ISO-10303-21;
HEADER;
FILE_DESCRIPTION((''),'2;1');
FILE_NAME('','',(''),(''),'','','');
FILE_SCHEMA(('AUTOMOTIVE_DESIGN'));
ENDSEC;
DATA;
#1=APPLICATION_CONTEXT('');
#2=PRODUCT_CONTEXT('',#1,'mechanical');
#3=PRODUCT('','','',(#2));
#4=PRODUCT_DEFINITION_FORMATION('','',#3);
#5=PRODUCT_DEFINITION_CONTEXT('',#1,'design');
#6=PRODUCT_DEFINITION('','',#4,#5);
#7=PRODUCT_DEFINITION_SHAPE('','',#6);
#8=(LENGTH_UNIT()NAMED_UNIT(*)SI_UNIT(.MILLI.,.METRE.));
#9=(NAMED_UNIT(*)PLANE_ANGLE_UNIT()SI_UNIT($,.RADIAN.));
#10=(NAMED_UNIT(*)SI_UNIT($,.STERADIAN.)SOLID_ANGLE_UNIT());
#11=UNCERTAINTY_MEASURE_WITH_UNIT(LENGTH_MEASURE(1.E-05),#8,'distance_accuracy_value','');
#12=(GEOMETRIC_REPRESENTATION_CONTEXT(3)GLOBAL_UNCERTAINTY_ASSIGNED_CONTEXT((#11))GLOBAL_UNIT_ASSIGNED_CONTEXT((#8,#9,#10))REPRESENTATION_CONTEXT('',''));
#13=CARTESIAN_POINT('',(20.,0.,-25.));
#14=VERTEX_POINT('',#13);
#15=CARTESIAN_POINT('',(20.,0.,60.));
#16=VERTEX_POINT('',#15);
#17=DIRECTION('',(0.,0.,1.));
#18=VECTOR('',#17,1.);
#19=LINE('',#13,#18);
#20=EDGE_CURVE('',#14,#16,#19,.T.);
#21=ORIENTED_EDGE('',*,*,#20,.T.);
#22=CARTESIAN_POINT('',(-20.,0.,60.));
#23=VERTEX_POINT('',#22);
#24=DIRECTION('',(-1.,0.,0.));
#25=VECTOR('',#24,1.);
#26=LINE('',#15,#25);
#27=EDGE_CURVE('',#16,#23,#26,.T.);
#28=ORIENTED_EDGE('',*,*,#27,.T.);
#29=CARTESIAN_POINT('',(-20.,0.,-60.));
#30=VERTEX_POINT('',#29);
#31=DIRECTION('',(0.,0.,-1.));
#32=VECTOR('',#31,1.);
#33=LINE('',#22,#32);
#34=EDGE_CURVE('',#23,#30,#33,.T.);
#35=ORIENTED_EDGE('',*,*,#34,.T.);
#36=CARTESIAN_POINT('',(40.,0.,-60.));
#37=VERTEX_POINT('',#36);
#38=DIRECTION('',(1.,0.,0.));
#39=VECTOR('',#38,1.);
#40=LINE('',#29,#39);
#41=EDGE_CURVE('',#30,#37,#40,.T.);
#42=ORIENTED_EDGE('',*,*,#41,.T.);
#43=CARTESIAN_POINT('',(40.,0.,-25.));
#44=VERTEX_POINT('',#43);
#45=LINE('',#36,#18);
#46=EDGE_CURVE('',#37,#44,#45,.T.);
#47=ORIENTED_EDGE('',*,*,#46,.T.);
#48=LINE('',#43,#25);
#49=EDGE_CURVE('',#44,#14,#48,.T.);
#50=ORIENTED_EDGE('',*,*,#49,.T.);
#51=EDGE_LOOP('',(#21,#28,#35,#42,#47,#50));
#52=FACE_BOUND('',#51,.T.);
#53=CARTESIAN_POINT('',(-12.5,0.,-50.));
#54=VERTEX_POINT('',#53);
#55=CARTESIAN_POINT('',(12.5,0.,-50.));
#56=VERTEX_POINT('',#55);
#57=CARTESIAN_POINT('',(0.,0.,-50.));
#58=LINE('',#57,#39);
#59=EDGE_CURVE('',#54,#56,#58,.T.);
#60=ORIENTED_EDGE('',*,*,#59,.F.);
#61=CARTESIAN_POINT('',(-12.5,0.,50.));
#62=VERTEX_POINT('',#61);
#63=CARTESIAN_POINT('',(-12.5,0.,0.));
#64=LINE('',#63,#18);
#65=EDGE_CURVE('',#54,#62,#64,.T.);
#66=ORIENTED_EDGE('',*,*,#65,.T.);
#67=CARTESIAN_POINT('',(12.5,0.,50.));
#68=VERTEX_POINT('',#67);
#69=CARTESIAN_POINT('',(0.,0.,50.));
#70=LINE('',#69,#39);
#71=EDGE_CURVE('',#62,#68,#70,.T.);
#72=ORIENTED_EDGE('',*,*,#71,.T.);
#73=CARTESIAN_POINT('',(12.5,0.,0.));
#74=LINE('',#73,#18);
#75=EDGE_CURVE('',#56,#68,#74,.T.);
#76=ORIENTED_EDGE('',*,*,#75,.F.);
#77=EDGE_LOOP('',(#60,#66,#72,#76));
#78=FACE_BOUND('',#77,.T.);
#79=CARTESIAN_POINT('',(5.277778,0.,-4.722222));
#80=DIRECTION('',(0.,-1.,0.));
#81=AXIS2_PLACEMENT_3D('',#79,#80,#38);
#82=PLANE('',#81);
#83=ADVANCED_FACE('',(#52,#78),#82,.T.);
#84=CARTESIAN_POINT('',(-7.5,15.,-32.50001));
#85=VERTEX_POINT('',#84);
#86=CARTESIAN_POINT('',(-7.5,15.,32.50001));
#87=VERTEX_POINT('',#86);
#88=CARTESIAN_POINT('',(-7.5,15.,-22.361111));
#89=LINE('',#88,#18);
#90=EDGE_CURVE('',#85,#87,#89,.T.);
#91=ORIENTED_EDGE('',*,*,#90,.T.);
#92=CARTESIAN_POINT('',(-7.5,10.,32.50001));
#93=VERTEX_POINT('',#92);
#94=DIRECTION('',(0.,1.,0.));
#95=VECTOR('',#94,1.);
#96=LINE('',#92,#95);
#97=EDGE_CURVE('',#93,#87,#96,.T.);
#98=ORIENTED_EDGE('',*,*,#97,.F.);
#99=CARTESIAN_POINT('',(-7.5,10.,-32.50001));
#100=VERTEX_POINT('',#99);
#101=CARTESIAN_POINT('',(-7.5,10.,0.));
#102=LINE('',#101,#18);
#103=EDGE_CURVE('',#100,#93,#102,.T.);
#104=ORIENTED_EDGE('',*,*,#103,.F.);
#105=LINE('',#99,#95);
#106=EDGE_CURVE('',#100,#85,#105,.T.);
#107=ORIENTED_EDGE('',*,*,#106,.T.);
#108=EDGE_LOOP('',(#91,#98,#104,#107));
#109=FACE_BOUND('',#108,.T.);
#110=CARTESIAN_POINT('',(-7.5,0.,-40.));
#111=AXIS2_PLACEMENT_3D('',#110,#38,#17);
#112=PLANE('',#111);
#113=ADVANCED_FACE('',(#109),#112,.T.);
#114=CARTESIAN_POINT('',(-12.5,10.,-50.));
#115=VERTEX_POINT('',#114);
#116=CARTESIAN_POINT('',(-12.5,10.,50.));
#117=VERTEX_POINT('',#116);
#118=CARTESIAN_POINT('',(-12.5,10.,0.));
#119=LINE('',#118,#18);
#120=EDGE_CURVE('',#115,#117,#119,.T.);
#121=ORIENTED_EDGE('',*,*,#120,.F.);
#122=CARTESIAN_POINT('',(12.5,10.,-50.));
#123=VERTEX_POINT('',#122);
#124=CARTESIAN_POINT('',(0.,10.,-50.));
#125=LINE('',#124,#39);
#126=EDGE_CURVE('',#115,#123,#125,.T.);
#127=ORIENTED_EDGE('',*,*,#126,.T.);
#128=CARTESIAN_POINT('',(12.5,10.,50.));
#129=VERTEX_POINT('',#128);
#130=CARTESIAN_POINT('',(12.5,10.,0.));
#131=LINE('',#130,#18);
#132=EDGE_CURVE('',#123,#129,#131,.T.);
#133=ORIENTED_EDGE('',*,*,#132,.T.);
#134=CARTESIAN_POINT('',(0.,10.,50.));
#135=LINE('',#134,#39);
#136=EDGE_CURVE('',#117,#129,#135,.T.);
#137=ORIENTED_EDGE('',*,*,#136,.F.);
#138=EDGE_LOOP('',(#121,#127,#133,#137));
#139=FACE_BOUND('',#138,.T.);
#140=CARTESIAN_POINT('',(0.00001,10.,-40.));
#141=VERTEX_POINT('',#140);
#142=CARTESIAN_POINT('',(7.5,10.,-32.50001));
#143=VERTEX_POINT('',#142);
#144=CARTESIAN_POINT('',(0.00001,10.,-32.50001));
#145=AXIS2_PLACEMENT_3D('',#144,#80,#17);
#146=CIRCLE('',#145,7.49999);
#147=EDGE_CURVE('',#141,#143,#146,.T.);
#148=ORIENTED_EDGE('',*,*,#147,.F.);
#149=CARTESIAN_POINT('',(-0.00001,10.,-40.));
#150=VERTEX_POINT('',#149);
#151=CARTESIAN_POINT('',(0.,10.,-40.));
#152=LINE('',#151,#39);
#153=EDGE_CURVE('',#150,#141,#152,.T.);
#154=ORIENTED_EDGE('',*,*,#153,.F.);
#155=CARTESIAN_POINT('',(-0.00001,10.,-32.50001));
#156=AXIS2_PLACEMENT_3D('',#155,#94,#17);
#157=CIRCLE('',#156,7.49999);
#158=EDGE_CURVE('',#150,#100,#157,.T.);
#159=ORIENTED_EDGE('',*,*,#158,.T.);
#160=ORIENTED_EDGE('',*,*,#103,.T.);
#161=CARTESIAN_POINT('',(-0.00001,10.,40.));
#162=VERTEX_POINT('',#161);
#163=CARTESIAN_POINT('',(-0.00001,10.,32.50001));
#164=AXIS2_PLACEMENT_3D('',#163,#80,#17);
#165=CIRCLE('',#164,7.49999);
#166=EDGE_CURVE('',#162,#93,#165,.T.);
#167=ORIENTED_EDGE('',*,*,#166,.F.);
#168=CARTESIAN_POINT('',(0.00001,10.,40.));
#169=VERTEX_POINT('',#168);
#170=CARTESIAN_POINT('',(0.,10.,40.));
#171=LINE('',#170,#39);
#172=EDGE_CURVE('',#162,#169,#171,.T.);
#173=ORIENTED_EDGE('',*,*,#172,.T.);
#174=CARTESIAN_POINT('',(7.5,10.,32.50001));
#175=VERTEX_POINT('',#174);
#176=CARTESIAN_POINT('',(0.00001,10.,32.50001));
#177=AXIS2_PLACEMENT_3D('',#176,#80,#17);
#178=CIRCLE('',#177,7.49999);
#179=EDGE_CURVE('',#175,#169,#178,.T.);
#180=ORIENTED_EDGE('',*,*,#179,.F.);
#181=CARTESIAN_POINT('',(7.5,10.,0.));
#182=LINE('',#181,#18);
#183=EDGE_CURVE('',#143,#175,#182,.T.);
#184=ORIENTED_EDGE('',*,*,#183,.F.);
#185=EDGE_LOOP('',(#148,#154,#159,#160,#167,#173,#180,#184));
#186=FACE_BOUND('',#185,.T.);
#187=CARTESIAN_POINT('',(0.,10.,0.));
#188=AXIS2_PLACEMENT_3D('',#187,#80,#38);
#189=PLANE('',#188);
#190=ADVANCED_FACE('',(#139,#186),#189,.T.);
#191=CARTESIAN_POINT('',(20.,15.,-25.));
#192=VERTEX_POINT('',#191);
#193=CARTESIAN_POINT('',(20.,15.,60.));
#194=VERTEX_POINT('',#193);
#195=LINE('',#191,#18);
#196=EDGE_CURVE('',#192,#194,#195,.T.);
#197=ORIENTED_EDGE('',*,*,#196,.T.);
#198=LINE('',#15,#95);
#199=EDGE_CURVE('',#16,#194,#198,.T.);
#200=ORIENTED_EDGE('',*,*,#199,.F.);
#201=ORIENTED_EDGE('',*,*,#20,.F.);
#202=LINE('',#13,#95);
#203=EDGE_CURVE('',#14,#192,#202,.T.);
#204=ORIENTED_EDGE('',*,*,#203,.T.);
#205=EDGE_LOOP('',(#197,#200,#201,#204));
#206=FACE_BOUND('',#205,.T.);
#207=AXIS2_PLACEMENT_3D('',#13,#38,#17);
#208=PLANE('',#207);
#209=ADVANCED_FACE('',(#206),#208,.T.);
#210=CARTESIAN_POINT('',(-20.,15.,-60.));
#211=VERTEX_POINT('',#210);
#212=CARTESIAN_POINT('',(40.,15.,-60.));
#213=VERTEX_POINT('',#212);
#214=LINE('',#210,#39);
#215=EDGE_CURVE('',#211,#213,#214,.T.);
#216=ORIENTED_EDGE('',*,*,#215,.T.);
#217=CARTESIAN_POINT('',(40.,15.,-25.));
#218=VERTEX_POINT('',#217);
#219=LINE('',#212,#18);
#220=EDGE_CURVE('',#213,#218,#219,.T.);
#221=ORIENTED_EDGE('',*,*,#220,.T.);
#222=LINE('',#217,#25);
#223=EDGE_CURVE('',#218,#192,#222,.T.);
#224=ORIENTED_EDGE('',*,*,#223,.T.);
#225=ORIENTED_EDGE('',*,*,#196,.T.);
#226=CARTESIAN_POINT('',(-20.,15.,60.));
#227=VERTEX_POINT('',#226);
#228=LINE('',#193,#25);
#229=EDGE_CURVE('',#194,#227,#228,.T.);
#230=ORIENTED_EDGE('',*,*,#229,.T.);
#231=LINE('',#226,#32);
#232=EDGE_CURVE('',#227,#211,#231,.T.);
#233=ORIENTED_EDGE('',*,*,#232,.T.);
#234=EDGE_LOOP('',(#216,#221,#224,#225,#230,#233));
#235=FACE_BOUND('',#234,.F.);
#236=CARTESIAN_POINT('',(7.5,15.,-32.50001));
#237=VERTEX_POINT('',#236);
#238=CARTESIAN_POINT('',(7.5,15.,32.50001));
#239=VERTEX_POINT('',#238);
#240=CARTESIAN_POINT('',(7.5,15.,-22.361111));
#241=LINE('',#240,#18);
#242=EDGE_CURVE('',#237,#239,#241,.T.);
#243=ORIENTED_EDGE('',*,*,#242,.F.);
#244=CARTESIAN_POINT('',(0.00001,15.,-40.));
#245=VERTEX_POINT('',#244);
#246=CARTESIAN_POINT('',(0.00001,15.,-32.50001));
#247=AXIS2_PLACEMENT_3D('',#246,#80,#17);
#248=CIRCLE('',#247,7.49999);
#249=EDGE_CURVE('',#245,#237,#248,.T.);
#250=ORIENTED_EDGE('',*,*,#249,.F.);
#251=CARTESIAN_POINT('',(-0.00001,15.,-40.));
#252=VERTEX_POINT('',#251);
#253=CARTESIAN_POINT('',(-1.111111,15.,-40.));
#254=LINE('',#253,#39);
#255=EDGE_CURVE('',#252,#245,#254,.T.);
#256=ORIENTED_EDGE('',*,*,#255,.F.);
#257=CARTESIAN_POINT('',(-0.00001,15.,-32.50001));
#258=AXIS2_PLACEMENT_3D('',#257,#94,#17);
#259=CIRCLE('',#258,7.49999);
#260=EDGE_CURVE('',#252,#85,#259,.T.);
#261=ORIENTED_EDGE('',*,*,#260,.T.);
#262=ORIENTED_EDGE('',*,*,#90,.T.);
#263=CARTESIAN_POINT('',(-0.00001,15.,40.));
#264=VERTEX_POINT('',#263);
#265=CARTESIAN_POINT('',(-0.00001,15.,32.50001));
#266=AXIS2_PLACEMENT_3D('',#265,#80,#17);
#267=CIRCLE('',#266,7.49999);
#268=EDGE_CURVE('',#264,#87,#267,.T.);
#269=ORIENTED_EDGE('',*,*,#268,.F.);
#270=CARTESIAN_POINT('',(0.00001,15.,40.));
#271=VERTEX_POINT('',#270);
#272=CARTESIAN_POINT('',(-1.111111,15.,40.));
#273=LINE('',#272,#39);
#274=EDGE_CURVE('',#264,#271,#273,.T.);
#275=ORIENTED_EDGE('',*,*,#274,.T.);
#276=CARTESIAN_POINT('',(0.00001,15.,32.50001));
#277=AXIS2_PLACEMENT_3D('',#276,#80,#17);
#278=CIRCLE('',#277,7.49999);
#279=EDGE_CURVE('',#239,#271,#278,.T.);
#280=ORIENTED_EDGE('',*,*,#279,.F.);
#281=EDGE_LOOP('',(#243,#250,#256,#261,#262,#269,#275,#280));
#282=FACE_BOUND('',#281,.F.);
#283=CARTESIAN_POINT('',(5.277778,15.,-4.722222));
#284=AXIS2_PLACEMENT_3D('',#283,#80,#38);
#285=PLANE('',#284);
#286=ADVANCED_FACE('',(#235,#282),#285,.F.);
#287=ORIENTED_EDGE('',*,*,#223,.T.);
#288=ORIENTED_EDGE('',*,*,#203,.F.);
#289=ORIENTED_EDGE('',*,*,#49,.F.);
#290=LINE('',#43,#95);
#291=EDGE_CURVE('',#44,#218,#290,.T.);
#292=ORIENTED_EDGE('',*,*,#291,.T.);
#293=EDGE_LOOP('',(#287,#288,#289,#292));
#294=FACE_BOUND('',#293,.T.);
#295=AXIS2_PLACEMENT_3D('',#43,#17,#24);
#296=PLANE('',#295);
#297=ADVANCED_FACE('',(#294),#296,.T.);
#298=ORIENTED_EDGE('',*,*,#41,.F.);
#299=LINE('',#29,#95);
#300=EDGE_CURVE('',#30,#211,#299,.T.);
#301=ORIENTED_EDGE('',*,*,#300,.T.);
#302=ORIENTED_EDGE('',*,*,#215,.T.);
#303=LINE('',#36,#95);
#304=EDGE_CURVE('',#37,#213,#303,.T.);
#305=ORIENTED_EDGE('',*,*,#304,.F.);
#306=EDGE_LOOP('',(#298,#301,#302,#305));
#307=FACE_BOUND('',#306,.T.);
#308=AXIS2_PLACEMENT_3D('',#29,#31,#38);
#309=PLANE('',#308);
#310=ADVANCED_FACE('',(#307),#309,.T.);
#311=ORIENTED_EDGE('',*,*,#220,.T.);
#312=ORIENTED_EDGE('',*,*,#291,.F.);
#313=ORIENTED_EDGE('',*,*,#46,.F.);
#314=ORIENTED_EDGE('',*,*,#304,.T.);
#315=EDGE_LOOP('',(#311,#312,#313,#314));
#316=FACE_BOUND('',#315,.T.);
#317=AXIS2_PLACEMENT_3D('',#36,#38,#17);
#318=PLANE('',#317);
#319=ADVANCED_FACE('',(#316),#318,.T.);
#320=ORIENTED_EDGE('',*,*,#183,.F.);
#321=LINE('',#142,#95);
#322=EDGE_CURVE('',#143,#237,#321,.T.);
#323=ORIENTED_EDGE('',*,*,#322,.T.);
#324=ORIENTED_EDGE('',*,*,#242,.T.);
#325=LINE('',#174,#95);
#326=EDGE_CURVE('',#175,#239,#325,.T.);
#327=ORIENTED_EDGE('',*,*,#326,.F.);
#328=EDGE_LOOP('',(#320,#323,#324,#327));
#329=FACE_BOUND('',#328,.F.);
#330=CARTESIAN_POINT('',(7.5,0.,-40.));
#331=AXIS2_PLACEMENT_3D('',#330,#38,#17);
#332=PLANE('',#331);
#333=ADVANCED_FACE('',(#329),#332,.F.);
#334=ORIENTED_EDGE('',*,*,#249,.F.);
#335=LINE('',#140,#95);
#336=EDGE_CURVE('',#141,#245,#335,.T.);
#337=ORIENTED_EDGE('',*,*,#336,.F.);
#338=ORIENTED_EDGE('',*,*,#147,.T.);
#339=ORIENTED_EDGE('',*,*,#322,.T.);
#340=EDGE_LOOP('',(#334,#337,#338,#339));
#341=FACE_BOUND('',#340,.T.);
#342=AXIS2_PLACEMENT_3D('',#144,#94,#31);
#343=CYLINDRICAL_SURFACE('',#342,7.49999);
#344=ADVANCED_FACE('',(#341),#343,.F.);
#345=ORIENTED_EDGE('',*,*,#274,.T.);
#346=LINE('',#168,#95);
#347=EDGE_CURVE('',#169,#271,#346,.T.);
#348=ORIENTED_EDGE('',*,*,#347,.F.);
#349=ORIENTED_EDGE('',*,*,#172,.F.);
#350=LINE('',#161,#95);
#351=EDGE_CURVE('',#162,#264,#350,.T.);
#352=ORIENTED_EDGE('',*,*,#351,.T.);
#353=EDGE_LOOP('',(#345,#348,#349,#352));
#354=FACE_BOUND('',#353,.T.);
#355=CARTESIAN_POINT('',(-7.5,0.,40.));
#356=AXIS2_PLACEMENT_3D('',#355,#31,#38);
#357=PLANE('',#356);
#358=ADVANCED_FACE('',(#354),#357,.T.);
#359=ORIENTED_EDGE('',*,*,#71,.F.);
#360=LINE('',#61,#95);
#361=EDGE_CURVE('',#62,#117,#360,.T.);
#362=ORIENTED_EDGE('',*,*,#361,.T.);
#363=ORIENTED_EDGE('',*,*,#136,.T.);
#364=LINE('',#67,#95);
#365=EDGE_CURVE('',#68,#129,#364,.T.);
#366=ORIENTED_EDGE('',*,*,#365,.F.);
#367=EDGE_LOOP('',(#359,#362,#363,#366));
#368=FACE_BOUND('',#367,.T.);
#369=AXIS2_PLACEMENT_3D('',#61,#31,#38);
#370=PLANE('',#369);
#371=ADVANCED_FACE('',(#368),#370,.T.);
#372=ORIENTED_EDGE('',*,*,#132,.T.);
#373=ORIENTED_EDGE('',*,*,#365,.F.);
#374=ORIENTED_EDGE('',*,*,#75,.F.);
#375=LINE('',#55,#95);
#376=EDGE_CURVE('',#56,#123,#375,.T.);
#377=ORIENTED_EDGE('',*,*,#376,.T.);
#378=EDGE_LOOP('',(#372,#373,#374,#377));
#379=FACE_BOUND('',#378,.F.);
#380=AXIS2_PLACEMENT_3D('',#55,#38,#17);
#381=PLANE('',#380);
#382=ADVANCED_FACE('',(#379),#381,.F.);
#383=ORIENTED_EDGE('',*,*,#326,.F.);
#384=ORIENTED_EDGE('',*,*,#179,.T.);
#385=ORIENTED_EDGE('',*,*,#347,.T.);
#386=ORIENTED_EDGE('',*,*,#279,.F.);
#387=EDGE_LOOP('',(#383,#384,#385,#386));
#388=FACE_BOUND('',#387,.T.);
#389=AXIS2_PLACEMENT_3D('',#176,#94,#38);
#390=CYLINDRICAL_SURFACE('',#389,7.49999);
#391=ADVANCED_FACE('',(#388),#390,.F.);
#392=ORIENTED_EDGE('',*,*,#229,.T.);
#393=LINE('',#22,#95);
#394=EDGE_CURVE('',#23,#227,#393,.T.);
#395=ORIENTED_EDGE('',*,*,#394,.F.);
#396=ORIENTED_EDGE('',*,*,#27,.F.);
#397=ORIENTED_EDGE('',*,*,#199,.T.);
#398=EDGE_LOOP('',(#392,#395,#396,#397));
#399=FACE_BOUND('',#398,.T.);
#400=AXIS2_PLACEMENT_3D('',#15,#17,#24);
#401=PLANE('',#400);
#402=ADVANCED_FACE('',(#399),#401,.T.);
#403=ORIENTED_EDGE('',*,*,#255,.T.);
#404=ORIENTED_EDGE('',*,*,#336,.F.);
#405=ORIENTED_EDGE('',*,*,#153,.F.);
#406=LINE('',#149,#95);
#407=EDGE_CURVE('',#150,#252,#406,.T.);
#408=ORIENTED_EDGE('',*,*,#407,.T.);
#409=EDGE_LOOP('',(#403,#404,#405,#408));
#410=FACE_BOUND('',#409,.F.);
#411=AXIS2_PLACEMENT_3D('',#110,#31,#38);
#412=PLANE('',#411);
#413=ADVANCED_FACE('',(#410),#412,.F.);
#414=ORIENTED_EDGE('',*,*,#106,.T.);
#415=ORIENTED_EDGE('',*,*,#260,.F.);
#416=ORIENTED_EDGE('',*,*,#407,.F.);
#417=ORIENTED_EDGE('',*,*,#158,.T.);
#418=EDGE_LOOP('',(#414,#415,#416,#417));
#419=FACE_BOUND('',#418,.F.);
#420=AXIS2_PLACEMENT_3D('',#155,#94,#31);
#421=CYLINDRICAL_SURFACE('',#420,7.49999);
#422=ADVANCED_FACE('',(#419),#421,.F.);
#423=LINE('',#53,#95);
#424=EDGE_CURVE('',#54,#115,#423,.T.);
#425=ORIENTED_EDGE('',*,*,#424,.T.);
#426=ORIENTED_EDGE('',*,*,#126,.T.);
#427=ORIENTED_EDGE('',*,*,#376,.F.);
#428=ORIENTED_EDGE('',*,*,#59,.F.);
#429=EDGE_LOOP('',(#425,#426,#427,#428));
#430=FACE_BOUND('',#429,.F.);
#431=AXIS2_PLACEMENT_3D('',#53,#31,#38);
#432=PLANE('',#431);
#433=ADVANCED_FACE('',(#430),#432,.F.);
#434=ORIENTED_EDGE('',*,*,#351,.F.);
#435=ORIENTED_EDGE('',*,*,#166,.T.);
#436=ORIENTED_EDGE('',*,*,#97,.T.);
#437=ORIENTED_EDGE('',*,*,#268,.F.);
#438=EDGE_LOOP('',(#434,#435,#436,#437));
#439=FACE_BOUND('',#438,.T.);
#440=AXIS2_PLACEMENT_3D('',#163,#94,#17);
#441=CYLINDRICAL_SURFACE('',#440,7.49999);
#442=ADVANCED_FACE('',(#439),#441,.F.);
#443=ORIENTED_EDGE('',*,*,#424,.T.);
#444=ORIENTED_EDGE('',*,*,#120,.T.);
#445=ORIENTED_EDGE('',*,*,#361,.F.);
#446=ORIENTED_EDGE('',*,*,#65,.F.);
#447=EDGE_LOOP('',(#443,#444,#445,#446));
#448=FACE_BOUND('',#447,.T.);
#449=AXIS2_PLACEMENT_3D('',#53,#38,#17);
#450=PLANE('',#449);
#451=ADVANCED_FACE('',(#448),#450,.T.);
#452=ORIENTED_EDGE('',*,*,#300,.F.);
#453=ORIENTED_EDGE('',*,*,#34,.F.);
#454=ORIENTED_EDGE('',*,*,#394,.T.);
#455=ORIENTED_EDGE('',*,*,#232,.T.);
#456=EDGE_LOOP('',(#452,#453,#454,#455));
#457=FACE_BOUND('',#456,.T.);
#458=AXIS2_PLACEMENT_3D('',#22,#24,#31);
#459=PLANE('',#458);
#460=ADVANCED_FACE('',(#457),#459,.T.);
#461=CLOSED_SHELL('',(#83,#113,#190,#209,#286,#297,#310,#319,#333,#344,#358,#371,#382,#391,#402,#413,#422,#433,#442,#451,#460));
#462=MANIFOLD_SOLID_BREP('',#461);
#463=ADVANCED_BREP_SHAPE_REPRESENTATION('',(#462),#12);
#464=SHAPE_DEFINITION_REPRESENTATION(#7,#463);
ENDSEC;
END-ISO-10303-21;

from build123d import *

# Parameters (mm, degrees)
F0_W     = 25
F0_H     = 100
F0_W_2   = 15
F0_H_2   = 80
F1_DEPTH = 15
F2_DEPTH = 10
F3_DEPTH = 15.001
F4_R     = 7.49999


# Not quite as in the source:
# - a fillet or chamfer is up to 0.001 mm smaller than in the source, because OpenCascade refuses the exact size


with BuildPart() as f1:
    # F0 (on Front) → F1 (new body)
    with BuildSketch(Plane.XZ):
        Polygon((20, -25), (20, 60), (-20, 60), (-20, -60), (40, -60), (40, -25), align=None)
        Rectangle(F0_W, F0_H, mode=Mode.SUBTRACT)
        Rectangle(F0_W, F0_H)
        Rectangle(F0_W_2, F0_H_2, mode=Mode.SUBTRACT)
        Rectangle(F0_W_2, F0_H_2)
    extrude(amount=-F1_DEPTH)

    # F0 (on Front) → F2 (cut)
    with BuildSketch(Plane.XZ):
        Rectangle(F0_W, F0_H)
        Rectangle(F0_W_2, F0_H_2, mode=Mode.SUBTRACT)
    extrude(amount=-F2_DEPTH, mode=Mode.SUBTRACT)

    # F0 (on Front) → F3 (cut, through all)
    with BuildSketch(Plane.XZ):
        Rectangle(F0_W_2, F0_H_2)
    extrude(amount=-F3_DEPTH, mode=Mode.SUBTRACT)

    # F4 (radius 7.5 in the source; OpenCascade refuses exactly that, so slightly less here)
    f4_edges = [f1.edges().sort_by_distance(p)[0] for p in [
        (-7.5, 12.5, 40),
        (7.5, 12.5, 40),
        (-7.5, 12.5, -40),
        (7.5, 12.5, -40),
    ]]
    fillet(f4_edges, radius=F4_R)


solid = f1.part
